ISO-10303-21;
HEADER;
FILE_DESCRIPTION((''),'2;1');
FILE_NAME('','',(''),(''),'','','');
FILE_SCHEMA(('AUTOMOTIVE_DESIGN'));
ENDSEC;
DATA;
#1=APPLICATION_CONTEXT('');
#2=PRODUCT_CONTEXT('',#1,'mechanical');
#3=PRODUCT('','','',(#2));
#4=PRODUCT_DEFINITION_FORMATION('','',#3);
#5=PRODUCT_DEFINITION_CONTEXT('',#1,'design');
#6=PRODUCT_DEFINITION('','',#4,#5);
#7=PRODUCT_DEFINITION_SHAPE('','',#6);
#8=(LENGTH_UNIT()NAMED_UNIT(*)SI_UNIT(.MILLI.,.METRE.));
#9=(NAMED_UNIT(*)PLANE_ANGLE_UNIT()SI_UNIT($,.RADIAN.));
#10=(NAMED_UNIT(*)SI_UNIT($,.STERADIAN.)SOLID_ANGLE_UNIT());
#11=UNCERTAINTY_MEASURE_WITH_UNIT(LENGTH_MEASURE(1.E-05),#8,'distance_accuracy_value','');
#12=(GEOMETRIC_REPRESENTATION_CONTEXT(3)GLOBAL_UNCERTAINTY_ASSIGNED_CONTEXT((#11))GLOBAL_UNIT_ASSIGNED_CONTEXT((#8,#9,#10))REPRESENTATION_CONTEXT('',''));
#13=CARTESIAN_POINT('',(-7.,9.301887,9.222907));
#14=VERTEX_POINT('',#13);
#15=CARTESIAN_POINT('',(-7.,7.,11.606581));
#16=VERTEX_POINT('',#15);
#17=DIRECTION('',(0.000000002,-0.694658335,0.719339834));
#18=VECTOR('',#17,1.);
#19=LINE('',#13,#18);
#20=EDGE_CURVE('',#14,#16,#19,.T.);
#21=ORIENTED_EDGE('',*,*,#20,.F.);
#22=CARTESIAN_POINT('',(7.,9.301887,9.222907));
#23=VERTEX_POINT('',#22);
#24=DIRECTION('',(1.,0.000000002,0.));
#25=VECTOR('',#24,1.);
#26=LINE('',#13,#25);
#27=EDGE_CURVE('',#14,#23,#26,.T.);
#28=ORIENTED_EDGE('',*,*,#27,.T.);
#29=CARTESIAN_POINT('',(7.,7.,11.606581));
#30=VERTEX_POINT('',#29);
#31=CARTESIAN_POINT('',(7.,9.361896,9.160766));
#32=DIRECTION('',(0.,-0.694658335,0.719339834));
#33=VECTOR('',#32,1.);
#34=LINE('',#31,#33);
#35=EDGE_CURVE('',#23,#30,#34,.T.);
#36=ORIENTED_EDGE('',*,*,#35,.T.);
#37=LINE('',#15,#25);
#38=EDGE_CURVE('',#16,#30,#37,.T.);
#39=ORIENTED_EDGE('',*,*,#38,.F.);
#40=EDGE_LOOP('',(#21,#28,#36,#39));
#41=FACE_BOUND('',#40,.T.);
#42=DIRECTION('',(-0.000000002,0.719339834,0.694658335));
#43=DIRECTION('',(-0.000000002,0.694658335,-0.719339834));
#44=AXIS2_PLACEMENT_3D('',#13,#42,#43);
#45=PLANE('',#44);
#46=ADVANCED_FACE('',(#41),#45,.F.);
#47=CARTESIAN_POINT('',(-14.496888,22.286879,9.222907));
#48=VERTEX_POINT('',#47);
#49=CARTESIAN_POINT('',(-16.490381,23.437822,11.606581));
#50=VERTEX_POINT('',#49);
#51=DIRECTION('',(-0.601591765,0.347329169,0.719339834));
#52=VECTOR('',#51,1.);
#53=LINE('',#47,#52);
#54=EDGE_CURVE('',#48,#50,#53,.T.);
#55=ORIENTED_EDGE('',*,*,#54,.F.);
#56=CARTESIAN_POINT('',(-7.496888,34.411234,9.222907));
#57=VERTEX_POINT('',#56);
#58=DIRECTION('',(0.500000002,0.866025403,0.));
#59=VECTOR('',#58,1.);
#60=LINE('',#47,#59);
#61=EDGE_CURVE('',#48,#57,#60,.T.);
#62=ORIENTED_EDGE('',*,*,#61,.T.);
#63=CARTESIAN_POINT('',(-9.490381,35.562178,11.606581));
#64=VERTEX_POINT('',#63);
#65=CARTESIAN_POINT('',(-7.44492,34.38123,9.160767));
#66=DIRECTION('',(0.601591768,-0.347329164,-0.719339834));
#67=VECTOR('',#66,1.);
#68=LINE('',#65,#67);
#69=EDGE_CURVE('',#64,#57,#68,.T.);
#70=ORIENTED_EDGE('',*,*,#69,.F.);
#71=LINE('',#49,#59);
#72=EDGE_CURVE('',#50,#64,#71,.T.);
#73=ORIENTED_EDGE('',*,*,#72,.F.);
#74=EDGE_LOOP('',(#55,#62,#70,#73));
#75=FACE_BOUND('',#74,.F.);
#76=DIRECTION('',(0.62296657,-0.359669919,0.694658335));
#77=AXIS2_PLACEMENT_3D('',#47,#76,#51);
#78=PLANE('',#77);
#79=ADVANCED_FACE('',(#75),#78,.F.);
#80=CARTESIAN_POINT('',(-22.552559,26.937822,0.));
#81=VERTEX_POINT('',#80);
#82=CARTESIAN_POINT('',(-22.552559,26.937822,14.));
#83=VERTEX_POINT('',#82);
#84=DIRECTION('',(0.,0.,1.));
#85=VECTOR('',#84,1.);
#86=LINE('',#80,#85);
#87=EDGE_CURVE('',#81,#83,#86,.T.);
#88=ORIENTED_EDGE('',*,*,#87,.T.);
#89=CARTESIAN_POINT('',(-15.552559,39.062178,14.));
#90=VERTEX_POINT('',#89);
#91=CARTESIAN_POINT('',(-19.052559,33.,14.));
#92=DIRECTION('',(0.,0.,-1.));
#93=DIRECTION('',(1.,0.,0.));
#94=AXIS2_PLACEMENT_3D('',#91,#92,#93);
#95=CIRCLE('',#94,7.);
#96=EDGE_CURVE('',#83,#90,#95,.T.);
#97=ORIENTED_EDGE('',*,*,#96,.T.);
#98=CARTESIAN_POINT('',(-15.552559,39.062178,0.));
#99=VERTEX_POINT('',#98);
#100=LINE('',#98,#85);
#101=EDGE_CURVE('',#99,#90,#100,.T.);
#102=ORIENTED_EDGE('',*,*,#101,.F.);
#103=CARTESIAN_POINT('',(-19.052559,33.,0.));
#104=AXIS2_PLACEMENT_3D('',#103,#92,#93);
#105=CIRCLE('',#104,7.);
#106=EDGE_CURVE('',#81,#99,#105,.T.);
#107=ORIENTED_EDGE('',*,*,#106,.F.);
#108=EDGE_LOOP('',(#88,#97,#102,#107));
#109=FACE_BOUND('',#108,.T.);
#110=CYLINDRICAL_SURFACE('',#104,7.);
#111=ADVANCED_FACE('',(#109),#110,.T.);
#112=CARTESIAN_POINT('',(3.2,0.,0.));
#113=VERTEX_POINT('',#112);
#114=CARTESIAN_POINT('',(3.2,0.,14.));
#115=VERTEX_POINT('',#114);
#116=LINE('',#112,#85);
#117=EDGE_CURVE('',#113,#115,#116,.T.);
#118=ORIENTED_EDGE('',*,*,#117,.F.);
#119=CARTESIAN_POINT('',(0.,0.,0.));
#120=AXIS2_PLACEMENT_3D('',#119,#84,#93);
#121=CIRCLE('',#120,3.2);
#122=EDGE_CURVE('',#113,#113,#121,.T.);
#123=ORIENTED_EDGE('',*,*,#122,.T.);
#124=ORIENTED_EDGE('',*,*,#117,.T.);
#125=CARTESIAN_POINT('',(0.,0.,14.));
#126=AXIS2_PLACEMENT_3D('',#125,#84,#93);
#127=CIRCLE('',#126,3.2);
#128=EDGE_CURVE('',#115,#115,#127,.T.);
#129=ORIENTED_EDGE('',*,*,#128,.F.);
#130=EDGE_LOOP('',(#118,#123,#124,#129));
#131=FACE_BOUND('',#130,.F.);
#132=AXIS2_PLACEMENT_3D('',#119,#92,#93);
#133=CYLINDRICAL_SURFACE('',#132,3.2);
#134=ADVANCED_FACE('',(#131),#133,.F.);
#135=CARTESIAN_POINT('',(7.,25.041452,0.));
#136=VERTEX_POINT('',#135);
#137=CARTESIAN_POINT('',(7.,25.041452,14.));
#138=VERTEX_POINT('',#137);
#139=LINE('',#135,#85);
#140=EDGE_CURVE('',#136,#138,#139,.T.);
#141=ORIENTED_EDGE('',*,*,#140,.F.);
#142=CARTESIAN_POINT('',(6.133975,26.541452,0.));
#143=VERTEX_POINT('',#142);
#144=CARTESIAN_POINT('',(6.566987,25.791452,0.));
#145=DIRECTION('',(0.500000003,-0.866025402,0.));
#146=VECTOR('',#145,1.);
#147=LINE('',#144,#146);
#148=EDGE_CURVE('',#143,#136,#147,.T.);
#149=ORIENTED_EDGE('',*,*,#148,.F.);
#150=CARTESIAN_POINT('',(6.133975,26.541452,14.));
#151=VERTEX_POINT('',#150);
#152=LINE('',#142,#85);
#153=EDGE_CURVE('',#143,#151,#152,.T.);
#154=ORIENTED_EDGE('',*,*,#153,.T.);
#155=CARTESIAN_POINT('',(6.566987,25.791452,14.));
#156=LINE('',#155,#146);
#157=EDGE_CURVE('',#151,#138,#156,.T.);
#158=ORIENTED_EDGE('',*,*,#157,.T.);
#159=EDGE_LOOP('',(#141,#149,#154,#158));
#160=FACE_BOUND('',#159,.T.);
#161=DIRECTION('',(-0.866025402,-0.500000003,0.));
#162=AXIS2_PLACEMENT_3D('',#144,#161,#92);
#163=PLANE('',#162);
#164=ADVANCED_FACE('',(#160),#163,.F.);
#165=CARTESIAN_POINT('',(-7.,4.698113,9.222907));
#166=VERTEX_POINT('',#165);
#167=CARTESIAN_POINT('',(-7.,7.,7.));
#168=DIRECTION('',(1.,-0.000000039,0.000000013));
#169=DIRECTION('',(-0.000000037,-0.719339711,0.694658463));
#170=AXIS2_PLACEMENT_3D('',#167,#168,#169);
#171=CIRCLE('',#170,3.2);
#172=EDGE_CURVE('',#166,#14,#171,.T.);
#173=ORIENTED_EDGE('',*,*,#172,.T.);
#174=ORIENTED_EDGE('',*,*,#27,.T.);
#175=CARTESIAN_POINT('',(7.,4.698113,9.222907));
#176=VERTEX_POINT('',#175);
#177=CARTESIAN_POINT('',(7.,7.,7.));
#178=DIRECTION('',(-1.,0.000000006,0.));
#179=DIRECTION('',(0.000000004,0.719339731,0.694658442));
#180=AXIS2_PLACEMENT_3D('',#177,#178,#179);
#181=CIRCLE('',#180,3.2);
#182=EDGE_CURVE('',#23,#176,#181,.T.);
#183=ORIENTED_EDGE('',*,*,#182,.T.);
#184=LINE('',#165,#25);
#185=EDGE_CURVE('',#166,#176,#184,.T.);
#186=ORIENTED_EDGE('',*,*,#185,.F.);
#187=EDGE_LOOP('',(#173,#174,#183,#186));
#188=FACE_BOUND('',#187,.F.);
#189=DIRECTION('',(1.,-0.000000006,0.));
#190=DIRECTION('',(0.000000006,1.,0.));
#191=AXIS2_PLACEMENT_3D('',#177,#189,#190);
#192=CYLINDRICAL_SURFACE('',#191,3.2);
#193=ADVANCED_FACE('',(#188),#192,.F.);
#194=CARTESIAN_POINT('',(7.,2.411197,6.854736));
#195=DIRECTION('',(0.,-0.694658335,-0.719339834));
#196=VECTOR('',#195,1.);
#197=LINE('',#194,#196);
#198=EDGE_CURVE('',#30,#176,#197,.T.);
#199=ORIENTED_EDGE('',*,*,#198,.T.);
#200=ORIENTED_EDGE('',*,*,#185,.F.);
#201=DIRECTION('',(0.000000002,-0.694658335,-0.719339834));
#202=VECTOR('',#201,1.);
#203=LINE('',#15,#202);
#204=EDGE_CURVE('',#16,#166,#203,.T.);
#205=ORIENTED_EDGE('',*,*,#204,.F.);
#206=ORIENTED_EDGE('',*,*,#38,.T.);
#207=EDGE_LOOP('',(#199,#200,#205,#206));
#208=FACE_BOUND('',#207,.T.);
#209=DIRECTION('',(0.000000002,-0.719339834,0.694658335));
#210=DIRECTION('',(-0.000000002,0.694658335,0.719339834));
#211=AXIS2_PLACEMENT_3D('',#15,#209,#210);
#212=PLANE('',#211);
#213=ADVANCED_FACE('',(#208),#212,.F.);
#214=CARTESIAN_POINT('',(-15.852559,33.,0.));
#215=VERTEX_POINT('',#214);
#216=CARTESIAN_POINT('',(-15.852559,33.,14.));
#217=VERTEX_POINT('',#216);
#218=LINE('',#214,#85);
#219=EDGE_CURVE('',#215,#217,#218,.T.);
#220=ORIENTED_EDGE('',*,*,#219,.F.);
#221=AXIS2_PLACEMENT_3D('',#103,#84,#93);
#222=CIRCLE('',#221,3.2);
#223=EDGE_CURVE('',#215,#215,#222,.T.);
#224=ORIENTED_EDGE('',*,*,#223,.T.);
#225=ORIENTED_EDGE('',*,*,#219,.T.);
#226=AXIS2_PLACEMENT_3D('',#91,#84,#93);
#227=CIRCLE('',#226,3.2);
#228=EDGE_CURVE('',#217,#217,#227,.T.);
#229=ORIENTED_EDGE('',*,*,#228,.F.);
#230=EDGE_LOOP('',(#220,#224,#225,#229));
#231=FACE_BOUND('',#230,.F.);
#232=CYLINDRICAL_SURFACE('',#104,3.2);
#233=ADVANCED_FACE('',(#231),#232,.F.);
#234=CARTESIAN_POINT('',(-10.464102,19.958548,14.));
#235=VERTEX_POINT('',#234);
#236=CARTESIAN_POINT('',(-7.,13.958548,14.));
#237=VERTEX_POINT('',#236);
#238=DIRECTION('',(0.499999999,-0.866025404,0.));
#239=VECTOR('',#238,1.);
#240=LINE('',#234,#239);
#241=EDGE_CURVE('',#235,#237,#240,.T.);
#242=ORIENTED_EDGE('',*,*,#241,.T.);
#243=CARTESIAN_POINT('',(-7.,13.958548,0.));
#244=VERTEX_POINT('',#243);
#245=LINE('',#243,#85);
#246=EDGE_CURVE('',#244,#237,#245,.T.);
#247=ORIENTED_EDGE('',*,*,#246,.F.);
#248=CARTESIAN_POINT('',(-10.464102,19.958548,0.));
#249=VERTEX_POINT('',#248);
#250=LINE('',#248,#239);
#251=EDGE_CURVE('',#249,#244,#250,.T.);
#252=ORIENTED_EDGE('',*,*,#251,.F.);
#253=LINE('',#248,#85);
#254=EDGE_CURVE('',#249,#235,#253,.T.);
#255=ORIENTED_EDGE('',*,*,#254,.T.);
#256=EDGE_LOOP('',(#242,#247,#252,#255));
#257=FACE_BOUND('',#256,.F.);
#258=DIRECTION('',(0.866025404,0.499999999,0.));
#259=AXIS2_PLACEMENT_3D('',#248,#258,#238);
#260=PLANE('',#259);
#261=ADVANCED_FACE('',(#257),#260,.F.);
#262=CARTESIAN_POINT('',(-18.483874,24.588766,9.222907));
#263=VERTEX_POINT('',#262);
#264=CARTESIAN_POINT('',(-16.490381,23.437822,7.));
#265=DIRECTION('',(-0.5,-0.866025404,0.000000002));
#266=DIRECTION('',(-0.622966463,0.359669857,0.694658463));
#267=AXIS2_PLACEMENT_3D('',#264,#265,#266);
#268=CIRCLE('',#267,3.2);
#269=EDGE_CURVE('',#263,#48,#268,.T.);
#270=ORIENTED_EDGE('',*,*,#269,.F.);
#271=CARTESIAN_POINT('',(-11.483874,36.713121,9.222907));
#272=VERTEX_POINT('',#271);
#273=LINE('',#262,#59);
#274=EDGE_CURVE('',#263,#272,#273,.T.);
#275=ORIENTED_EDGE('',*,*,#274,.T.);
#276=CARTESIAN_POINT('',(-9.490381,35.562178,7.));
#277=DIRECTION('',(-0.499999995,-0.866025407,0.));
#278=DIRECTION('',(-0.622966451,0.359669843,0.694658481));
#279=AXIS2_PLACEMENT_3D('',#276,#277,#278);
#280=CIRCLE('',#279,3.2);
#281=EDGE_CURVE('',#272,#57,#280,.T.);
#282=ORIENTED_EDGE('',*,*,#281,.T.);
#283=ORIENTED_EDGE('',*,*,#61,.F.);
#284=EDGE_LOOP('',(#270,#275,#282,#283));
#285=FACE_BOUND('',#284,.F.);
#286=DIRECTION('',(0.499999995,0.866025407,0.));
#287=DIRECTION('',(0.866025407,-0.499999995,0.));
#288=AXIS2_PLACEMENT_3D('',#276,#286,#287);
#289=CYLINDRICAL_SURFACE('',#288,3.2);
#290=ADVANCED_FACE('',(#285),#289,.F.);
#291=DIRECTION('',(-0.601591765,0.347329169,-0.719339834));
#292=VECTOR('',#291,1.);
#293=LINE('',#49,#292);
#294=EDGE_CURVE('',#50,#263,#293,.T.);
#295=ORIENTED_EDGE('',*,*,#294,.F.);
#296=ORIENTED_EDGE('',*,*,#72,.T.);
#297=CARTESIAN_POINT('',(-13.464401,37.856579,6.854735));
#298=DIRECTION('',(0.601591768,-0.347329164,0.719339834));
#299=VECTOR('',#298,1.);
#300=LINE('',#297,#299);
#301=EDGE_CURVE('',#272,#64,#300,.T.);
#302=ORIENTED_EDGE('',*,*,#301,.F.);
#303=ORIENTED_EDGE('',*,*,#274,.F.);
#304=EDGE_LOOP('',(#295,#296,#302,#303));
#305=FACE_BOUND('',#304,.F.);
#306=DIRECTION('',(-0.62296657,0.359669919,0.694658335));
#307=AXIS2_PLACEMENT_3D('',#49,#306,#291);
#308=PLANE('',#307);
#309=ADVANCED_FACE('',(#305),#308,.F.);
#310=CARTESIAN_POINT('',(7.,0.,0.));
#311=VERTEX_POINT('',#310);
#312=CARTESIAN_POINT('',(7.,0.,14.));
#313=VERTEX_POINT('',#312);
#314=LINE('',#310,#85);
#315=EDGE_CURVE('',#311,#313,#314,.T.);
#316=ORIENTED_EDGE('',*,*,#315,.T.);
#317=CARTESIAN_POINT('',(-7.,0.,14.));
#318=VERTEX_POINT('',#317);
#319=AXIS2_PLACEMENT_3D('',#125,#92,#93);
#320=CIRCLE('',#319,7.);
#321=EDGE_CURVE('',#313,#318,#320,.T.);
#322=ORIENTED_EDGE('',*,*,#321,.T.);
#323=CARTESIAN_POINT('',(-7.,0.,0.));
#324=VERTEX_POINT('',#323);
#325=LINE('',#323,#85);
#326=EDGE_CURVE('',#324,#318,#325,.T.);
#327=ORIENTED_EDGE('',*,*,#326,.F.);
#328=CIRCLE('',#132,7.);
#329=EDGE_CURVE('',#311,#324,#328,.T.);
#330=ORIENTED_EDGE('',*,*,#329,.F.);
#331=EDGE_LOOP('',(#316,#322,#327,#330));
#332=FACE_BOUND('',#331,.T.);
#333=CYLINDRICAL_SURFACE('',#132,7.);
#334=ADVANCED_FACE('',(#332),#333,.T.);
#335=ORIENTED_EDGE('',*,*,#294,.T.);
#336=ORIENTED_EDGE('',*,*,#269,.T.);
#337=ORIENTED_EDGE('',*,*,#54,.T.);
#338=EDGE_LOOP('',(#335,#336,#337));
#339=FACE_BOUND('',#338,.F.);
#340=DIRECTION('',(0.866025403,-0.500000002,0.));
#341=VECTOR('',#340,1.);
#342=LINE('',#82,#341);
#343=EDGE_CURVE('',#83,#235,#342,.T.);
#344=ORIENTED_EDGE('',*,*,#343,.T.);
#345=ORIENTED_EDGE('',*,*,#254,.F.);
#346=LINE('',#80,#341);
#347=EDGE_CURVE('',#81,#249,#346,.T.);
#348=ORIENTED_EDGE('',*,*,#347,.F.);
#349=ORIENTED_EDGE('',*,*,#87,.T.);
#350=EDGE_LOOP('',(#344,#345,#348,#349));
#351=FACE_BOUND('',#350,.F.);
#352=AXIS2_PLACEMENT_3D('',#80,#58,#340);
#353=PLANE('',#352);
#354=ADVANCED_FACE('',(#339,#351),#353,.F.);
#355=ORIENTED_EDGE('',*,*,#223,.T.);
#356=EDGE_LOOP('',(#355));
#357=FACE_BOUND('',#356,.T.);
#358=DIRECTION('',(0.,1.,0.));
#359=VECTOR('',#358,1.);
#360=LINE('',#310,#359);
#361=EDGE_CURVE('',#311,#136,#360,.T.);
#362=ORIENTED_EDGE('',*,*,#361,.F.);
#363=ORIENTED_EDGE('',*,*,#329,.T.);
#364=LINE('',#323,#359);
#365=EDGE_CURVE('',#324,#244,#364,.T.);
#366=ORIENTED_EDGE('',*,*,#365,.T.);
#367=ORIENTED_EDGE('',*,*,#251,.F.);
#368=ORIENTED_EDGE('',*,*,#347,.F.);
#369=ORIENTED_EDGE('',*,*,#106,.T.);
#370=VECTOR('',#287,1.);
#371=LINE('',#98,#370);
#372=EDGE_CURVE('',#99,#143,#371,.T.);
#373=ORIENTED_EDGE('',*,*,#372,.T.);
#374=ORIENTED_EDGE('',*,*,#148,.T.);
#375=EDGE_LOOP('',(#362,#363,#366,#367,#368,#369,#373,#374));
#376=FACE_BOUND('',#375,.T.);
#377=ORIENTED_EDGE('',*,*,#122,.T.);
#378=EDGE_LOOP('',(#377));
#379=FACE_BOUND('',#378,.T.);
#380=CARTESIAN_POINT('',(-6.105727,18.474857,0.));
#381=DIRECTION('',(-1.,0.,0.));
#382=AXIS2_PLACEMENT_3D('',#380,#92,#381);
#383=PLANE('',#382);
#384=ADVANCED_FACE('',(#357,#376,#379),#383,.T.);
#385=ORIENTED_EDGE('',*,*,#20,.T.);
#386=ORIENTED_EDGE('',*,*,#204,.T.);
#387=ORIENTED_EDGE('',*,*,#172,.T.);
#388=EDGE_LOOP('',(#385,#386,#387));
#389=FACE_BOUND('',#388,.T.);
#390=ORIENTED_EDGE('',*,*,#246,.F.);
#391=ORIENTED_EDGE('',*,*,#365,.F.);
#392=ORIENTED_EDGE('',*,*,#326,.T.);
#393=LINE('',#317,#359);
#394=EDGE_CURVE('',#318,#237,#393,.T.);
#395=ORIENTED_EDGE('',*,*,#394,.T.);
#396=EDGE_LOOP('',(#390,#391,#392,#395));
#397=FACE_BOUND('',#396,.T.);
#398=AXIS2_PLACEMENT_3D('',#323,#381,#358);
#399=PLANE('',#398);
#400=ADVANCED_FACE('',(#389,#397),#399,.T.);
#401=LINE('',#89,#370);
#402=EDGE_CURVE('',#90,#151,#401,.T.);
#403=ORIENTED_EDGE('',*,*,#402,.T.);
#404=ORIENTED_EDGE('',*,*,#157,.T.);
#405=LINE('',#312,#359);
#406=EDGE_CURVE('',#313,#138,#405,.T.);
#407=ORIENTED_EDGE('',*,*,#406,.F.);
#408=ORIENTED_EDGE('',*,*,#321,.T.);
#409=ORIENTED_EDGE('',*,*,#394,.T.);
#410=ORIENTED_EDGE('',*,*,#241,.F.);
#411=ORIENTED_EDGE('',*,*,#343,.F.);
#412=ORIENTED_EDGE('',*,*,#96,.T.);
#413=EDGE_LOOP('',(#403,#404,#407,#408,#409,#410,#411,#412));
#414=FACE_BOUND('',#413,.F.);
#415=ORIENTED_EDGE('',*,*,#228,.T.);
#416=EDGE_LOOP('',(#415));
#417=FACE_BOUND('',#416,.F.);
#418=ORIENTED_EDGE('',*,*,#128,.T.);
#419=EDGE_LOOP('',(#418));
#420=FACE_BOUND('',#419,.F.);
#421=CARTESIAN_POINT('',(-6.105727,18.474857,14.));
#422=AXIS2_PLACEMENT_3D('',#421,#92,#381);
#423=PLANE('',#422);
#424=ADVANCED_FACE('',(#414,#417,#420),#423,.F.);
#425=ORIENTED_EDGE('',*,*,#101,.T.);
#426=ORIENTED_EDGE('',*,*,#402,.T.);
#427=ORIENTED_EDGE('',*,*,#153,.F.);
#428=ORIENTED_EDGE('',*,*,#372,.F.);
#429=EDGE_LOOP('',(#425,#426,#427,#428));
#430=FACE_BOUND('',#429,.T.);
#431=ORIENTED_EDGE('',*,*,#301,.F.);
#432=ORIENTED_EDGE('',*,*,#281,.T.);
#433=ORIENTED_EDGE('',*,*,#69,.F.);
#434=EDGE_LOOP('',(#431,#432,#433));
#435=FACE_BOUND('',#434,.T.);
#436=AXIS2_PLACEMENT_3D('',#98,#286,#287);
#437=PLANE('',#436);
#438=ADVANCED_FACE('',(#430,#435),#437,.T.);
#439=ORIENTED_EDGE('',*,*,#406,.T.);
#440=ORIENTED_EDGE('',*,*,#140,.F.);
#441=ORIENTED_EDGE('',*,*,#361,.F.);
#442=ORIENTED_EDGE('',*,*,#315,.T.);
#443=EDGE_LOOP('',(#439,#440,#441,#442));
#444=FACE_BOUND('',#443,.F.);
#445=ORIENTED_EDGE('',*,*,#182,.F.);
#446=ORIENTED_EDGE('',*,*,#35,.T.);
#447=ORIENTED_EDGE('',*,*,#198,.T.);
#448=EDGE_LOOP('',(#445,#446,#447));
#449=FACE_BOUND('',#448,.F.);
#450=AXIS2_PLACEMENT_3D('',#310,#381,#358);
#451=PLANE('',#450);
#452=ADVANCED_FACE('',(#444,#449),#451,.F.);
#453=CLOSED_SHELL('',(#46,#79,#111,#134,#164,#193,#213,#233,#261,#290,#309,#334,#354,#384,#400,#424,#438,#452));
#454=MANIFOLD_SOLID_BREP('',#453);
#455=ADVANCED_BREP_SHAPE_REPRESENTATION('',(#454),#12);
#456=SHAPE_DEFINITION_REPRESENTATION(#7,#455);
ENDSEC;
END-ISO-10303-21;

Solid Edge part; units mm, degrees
sketch "Sketch1" plane through (0, 0, 0) normal (0, 0, 1) x (1, 0, 0)
  line L0 (-15.552559, 39.062178) -> (7, 26.041452)
  line L1 (7, 0) -> (7, 26.041452)
  arc A0 (7, 0) -> (-7, 0) centre (0, 0) cw
  line L2 (-7, 0) -> (-7, 17.958548)
  line L3 (-22.552559, 26.937822) -> (-7, 17.958548)
  arc A1 (-22.552559, 26.937822) -> (-15.552559, 39.062178) centre (-19.052559, 33) cw
  circle A2 centre (-19.052559, 33) radius 3.2
  circle A3 centre (0, 0) radius 3.2
  dimension "D1" = 22
  dimension "D2" = 7
  dimension "D3" = 22
  dimension "D4" = 7
  dimension "D5" = 6.4
extrude "Protrusion1" add sketch "Sketch1" along normal blind 14
sketch "Sketch2" plane through (-3.410254, 32.051815, 7) normal (0.5, 0.8660254, 0) x (0.8660254, -0.5, 0)
  circle A0 centre (-7.020726, 0) radius 3.2
  dimension "D1" = 7
extrude "Cutout1" cut sketch "Sketch2" against normal through all
sketch "Sketch3" plane through (-15.642305, 22.948185, 7) normal (-0.5, -0.8660254, 0) x (0.8660254, -0.5, 0)
  line L0 (-0.979274, 0) -> (1.322613, 2.222907)
  line L1 (1.322613, 2.222907) -> (-0.979274, 4.606581)
  line L2 (-0.979274, 4.606581) -> (-3.281161, 2.222907)
  line L3 (-3.281161, 2.222907) -> (-0.979274, 0)
extrude "Cutout2" cut sketch "Sketch3" against normal through all
mirror "Mirror1" about plane through (-7.433013, 17.708548, 14) normal (-0.5, 0.8660254, 0) of "Cutout1", "Cutout2"
chamfer "v_4" distance 4 angle 45 1 edges at (-7, 17.958548, 7)
chamfer "Chamfer_2" distance 1 angle 45 1 edges at (7, 26.041452, 7)
properties material "ABS Plastic, high impact"
